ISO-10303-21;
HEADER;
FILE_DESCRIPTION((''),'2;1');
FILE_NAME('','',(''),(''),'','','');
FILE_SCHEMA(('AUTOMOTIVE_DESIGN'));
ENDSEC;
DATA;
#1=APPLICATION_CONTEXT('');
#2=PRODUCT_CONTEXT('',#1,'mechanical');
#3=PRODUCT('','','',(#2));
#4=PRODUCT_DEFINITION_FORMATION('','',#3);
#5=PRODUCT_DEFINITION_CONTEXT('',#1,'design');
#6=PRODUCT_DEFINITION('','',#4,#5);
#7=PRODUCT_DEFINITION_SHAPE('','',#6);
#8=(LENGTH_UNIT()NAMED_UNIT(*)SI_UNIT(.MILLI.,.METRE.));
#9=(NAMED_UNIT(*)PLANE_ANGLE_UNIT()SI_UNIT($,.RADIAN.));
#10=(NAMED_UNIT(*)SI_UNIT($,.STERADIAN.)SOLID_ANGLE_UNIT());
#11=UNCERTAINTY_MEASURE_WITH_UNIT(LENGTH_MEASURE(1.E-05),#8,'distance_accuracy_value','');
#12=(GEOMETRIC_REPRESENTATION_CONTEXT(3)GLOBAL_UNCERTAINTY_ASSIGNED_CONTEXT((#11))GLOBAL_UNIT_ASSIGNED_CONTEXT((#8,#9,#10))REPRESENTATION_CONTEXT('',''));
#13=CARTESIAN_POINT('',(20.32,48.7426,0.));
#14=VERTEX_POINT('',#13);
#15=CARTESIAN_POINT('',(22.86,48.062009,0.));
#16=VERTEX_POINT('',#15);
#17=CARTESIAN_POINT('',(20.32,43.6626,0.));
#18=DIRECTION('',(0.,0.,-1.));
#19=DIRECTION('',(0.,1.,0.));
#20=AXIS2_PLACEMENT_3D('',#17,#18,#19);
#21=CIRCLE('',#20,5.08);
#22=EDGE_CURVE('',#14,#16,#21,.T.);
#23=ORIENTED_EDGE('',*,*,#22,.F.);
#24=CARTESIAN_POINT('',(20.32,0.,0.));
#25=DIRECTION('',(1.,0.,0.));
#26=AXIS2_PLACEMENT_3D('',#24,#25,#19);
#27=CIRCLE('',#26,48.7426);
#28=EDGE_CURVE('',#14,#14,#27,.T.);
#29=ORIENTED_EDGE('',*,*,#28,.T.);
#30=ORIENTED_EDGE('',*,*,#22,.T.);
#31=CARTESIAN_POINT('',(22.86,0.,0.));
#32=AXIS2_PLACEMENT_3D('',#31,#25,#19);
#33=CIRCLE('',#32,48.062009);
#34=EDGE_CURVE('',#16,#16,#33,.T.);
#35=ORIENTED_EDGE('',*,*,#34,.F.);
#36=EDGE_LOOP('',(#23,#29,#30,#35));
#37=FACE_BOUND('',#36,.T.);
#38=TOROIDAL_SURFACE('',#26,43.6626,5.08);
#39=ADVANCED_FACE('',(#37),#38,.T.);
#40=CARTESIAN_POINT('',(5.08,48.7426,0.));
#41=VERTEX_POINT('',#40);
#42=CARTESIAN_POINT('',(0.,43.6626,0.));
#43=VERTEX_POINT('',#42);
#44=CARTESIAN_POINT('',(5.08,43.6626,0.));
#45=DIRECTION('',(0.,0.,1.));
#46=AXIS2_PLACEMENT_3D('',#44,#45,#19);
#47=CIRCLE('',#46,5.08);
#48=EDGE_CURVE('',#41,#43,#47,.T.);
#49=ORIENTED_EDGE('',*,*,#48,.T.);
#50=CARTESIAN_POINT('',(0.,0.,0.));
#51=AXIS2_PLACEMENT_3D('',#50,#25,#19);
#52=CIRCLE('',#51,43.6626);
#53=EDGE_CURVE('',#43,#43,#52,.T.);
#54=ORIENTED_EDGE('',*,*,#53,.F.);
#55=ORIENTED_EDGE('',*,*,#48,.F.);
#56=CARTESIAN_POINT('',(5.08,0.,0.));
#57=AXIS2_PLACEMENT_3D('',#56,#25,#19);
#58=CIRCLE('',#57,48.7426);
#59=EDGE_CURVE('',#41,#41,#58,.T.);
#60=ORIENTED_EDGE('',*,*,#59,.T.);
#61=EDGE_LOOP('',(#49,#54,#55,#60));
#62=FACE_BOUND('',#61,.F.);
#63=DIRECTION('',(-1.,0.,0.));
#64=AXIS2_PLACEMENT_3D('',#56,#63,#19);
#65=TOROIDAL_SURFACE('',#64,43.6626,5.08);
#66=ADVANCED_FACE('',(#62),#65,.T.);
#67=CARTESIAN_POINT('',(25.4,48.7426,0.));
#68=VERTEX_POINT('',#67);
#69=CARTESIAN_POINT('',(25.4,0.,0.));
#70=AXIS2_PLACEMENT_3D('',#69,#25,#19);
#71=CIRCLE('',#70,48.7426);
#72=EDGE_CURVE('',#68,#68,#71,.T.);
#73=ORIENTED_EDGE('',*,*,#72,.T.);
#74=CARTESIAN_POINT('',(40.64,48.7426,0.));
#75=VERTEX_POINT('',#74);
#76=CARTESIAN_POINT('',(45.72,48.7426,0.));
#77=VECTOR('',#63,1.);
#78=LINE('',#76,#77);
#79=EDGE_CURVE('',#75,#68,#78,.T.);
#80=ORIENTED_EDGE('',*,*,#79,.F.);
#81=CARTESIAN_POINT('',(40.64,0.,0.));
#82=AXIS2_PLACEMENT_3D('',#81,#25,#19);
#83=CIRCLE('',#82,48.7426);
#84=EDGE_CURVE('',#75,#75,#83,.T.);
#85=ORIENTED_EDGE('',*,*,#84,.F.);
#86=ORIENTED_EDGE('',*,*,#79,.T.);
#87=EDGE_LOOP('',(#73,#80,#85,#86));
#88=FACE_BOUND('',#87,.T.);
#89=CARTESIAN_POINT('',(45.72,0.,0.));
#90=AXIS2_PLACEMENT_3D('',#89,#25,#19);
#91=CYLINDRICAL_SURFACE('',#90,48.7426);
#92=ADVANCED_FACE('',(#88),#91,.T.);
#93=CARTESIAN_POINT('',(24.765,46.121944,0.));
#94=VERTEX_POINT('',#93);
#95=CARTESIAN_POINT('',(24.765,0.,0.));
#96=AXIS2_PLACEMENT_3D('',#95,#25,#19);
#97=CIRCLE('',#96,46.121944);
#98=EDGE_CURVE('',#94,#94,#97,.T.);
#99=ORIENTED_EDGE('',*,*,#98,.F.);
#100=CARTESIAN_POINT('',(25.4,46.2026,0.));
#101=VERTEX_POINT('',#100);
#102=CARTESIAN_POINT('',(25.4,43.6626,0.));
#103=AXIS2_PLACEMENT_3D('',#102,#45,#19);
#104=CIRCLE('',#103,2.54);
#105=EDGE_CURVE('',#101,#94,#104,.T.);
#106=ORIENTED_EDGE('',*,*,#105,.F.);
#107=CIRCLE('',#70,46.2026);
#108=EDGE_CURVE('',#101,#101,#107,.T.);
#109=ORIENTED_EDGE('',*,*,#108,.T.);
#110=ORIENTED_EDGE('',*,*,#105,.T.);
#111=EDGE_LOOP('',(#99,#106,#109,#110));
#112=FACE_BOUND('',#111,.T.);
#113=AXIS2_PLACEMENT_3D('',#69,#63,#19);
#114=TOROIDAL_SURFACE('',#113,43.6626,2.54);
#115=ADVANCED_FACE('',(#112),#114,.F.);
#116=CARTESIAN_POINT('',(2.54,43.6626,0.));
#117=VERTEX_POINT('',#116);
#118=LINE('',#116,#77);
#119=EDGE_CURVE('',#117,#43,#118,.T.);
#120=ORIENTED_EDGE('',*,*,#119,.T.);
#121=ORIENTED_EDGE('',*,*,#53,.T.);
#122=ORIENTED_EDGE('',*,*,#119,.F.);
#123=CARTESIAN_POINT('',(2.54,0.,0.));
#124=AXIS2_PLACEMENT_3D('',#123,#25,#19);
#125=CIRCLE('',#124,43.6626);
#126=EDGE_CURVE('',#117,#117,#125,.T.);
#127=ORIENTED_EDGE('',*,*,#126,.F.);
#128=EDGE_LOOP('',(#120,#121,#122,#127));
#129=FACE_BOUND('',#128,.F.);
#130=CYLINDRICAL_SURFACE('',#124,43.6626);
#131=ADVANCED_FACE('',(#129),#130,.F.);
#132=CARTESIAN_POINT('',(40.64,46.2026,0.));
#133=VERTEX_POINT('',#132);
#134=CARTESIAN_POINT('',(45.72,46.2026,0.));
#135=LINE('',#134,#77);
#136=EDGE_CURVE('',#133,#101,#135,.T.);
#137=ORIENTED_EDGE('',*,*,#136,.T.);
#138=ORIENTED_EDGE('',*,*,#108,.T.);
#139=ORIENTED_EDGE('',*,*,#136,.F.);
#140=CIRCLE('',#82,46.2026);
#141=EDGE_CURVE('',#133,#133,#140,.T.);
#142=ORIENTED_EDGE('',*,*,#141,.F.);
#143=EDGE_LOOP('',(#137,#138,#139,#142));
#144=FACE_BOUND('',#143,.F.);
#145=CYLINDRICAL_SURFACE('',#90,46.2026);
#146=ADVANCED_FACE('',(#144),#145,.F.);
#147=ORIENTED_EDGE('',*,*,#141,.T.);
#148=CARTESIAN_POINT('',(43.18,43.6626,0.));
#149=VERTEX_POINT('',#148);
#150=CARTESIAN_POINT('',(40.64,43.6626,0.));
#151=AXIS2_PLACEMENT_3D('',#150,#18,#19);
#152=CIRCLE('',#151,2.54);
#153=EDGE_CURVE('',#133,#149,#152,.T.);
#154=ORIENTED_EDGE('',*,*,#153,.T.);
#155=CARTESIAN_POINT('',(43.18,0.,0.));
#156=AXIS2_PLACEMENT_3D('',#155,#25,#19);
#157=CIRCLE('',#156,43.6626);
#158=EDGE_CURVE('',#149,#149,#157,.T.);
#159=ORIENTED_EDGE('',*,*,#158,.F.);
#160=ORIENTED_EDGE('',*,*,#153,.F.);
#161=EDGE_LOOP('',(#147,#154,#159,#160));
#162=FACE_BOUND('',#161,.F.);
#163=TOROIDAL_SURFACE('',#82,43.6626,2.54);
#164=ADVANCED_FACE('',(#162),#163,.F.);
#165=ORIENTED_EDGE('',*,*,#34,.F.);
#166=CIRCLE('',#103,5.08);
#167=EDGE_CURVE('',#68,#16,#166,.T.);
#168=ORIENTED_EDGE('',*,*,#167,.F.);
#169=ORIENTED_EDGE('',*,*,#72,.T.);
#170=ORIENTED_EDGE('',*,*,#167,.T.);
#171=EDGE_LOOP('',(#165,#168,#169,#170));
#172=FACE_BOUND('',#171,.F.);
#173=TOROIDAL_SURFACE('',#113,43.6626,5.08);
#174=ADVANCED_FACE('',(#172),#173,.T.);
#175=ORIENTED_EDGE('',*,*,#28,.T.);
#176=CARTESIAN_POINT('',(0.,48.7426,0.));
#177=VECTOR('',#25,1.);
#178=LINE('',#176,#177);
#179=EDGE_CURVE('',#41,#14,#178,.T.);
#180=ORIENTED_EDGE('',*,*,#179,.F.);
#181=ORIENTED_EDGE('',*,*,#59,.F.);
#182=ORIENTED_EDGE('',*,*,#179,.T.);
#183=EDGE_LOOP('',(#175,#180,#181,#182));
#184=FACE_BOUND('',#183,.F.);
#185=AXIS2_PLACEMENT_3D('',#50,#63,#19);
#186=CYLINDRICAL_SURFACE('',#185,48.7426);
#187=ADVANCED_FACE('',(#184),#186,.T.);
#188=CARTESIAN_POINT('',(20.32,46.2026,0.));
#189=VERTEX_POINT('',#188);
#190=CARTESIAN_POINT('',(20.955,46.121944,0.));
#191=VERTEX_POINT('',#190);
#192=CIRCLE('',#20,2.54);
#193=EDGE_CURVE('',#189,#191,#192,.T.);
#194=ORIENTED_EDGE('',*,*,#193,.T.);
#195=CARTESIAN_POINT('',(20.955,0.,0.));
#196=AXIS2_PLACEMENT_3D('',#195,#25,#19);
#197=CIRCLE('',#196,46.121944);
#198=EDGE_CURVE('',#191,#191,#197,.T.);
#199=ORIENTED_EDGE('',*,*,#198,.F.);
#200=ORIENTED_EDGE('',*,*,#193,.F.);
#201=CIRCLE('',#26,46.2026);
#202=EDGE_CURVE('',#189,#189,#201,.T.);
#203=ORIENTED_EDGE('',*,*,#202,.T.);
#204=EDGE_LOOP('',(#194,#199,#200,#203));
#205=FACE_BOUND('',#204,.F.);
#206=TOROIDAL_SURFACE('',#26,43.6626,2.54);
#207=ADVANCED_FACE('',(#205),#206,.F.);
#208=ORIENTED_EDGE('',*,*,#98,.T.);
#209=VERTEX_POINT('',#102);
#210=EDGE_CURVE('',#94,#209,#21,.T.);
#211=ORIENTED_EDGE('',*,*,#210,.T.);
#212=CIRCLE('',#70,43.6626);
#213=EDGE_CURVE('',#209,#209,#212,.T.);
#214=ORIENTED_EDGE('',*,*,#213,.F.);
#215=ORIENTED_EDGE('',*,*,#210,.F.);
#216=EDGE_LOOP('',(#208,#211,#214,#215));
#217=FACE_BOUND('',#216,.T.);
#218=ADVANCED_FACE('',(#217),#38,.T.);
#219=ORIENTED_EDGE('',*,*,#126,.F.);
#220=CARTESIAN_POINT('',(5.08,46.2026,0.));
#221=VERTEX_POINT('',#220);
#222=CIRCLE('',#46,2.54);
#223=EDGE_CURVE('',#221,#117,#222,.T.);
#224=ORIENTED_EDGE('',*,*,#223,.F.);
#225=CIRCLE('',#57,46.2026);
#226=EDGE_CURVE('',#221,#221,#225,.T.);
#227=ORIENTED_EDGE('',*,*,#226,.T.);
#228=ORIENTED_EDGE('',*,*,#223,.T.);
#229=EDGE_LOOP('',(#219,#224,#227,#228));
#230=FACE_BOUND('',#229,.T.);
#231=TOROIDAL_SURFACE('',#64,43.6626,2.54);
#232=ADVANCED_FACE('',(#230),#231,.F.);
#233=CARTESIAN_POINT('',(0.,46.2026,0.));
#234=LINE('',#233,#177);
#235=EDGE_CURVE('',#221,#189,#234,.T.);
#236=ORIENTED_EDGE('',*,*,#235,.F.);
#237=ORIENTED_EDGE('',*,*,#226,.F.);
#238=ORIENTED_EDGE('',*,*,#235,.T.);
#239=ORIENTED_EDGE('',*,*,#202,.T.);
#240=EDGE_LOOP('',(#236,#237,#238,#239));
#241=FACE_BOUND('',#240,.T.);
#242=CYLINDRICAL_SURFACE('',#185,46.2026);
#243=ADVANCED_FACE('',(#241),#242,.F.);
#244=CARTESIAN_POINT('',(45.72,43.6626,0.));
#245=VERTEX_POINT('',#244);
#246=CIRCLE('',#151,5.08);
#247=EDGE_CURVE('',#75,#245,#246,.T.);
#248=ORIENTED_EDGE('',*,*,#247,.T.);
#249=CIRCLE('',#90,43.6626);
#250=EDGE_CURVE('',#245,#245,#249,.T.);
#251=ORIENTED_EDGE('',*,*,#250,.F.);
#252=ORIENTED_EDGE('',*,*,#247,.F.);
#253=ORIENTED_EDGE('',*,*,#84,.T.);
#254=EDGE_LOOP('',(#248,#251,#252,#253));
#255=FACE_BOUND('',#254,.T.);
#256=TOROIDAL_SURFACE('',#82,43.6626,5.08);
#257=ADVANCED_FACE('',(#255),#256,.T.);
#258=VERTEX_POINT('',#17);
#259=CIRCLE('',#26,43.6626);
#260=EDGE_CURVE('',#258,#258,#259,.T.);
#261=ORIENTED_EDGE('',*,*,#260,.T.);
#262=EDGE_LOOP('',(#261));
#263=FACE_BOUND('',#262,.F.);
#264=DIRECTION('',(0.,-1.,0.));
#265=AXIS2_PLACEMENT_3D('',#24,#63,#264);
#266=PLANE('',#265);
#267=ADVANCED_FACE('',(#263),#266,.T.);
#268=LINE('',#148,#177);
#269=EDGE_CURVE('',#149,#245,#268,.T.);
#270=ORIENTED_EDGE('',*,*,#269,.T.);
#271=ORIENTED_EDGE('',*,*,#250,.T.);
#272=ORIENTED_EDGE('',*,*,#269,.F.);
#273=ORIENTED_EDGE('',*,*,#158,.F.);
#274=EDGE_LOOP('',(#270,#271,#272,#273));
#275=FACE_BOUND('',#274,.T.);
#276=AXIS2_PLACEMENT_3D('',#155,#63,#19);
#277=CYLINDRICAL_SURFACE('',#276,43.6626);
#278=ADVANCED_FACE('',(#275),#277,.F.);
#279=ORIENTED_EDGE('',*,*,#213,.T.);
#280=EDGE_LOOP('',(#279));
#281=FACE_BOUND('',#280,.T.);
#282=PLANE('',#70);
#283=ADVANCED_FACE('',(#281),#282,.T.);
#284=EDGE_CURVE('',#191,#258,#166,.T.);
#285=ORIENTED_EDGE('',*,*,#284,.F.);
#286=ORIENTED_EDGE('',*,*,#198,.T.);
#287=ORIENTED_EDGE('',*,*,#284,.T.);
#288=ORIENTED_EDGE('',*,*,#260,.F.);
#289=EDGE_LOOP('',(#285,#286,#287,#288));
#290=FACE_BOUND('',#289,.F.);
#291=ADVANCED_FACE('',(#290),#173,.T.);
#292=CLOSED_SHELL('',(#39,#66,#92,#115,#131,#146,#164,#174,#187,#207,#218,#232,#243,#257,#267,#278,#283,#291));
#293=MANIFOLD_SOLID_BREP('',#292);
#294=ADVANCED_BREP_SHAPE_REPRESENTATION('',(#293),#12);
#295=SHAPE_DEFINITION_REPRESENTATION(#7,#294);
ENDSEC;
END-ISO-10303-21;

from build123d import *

# Parameters (mm, degrees)
F0_R     = 48.7426
F1_DEPTH = 25.4
F2_R     = 5.08
F3_T     = -2.54


# Not quite as in the source:
# - a shell that OpenCascade refuses in one call is made with other operations: the cavity is built on its own and cut out


with BuildPart() as f1:
    # F0 (on Right) → F1 (new body)
    with BuildSketch(Plane.YZ):
        Circle(F0_R)
    extrude(amount=F1_DEPTH)

    # F2
    f2_edges = [f1.edges().sort_by_distance(p)[0] for p in [
        (12.7, 48.7426, 0),
        (0, -48.7426, 0),
        (25.4, -48.7426, 0),
    ]]
    fillet(f2_edges, radius=F2_R)

    # F3: a shell. OpenCascade refuses it in one call, so the cavity is built on its own and cut out:
    # the body offset inwards by the wall thickness, plus a prism from it out through each open face.
    f3_core = offset(f1.part, amount=F3_T, mode=Mode.PRIVATE)
    f3_exits = [f3_core.faces().sort_by_distance(p)[0] for p in [
        (2.54, 0, 0),
    ]]
    add(f3_core, mode=Mode.SUBTRACT)
    extrude(f3_exits, amount=-F3_T, mode=Mode.SUBTRACT)

    # F4: F1 across face


with BuildPart() as f1_1:
    add(f1.part)
    add(f1.part.mirror(Plane(origin=(22.86, 0, 0), x_dir=(0, -1, 0), z_dir=(-1, 0, 0))))


solid = f1_1.part
